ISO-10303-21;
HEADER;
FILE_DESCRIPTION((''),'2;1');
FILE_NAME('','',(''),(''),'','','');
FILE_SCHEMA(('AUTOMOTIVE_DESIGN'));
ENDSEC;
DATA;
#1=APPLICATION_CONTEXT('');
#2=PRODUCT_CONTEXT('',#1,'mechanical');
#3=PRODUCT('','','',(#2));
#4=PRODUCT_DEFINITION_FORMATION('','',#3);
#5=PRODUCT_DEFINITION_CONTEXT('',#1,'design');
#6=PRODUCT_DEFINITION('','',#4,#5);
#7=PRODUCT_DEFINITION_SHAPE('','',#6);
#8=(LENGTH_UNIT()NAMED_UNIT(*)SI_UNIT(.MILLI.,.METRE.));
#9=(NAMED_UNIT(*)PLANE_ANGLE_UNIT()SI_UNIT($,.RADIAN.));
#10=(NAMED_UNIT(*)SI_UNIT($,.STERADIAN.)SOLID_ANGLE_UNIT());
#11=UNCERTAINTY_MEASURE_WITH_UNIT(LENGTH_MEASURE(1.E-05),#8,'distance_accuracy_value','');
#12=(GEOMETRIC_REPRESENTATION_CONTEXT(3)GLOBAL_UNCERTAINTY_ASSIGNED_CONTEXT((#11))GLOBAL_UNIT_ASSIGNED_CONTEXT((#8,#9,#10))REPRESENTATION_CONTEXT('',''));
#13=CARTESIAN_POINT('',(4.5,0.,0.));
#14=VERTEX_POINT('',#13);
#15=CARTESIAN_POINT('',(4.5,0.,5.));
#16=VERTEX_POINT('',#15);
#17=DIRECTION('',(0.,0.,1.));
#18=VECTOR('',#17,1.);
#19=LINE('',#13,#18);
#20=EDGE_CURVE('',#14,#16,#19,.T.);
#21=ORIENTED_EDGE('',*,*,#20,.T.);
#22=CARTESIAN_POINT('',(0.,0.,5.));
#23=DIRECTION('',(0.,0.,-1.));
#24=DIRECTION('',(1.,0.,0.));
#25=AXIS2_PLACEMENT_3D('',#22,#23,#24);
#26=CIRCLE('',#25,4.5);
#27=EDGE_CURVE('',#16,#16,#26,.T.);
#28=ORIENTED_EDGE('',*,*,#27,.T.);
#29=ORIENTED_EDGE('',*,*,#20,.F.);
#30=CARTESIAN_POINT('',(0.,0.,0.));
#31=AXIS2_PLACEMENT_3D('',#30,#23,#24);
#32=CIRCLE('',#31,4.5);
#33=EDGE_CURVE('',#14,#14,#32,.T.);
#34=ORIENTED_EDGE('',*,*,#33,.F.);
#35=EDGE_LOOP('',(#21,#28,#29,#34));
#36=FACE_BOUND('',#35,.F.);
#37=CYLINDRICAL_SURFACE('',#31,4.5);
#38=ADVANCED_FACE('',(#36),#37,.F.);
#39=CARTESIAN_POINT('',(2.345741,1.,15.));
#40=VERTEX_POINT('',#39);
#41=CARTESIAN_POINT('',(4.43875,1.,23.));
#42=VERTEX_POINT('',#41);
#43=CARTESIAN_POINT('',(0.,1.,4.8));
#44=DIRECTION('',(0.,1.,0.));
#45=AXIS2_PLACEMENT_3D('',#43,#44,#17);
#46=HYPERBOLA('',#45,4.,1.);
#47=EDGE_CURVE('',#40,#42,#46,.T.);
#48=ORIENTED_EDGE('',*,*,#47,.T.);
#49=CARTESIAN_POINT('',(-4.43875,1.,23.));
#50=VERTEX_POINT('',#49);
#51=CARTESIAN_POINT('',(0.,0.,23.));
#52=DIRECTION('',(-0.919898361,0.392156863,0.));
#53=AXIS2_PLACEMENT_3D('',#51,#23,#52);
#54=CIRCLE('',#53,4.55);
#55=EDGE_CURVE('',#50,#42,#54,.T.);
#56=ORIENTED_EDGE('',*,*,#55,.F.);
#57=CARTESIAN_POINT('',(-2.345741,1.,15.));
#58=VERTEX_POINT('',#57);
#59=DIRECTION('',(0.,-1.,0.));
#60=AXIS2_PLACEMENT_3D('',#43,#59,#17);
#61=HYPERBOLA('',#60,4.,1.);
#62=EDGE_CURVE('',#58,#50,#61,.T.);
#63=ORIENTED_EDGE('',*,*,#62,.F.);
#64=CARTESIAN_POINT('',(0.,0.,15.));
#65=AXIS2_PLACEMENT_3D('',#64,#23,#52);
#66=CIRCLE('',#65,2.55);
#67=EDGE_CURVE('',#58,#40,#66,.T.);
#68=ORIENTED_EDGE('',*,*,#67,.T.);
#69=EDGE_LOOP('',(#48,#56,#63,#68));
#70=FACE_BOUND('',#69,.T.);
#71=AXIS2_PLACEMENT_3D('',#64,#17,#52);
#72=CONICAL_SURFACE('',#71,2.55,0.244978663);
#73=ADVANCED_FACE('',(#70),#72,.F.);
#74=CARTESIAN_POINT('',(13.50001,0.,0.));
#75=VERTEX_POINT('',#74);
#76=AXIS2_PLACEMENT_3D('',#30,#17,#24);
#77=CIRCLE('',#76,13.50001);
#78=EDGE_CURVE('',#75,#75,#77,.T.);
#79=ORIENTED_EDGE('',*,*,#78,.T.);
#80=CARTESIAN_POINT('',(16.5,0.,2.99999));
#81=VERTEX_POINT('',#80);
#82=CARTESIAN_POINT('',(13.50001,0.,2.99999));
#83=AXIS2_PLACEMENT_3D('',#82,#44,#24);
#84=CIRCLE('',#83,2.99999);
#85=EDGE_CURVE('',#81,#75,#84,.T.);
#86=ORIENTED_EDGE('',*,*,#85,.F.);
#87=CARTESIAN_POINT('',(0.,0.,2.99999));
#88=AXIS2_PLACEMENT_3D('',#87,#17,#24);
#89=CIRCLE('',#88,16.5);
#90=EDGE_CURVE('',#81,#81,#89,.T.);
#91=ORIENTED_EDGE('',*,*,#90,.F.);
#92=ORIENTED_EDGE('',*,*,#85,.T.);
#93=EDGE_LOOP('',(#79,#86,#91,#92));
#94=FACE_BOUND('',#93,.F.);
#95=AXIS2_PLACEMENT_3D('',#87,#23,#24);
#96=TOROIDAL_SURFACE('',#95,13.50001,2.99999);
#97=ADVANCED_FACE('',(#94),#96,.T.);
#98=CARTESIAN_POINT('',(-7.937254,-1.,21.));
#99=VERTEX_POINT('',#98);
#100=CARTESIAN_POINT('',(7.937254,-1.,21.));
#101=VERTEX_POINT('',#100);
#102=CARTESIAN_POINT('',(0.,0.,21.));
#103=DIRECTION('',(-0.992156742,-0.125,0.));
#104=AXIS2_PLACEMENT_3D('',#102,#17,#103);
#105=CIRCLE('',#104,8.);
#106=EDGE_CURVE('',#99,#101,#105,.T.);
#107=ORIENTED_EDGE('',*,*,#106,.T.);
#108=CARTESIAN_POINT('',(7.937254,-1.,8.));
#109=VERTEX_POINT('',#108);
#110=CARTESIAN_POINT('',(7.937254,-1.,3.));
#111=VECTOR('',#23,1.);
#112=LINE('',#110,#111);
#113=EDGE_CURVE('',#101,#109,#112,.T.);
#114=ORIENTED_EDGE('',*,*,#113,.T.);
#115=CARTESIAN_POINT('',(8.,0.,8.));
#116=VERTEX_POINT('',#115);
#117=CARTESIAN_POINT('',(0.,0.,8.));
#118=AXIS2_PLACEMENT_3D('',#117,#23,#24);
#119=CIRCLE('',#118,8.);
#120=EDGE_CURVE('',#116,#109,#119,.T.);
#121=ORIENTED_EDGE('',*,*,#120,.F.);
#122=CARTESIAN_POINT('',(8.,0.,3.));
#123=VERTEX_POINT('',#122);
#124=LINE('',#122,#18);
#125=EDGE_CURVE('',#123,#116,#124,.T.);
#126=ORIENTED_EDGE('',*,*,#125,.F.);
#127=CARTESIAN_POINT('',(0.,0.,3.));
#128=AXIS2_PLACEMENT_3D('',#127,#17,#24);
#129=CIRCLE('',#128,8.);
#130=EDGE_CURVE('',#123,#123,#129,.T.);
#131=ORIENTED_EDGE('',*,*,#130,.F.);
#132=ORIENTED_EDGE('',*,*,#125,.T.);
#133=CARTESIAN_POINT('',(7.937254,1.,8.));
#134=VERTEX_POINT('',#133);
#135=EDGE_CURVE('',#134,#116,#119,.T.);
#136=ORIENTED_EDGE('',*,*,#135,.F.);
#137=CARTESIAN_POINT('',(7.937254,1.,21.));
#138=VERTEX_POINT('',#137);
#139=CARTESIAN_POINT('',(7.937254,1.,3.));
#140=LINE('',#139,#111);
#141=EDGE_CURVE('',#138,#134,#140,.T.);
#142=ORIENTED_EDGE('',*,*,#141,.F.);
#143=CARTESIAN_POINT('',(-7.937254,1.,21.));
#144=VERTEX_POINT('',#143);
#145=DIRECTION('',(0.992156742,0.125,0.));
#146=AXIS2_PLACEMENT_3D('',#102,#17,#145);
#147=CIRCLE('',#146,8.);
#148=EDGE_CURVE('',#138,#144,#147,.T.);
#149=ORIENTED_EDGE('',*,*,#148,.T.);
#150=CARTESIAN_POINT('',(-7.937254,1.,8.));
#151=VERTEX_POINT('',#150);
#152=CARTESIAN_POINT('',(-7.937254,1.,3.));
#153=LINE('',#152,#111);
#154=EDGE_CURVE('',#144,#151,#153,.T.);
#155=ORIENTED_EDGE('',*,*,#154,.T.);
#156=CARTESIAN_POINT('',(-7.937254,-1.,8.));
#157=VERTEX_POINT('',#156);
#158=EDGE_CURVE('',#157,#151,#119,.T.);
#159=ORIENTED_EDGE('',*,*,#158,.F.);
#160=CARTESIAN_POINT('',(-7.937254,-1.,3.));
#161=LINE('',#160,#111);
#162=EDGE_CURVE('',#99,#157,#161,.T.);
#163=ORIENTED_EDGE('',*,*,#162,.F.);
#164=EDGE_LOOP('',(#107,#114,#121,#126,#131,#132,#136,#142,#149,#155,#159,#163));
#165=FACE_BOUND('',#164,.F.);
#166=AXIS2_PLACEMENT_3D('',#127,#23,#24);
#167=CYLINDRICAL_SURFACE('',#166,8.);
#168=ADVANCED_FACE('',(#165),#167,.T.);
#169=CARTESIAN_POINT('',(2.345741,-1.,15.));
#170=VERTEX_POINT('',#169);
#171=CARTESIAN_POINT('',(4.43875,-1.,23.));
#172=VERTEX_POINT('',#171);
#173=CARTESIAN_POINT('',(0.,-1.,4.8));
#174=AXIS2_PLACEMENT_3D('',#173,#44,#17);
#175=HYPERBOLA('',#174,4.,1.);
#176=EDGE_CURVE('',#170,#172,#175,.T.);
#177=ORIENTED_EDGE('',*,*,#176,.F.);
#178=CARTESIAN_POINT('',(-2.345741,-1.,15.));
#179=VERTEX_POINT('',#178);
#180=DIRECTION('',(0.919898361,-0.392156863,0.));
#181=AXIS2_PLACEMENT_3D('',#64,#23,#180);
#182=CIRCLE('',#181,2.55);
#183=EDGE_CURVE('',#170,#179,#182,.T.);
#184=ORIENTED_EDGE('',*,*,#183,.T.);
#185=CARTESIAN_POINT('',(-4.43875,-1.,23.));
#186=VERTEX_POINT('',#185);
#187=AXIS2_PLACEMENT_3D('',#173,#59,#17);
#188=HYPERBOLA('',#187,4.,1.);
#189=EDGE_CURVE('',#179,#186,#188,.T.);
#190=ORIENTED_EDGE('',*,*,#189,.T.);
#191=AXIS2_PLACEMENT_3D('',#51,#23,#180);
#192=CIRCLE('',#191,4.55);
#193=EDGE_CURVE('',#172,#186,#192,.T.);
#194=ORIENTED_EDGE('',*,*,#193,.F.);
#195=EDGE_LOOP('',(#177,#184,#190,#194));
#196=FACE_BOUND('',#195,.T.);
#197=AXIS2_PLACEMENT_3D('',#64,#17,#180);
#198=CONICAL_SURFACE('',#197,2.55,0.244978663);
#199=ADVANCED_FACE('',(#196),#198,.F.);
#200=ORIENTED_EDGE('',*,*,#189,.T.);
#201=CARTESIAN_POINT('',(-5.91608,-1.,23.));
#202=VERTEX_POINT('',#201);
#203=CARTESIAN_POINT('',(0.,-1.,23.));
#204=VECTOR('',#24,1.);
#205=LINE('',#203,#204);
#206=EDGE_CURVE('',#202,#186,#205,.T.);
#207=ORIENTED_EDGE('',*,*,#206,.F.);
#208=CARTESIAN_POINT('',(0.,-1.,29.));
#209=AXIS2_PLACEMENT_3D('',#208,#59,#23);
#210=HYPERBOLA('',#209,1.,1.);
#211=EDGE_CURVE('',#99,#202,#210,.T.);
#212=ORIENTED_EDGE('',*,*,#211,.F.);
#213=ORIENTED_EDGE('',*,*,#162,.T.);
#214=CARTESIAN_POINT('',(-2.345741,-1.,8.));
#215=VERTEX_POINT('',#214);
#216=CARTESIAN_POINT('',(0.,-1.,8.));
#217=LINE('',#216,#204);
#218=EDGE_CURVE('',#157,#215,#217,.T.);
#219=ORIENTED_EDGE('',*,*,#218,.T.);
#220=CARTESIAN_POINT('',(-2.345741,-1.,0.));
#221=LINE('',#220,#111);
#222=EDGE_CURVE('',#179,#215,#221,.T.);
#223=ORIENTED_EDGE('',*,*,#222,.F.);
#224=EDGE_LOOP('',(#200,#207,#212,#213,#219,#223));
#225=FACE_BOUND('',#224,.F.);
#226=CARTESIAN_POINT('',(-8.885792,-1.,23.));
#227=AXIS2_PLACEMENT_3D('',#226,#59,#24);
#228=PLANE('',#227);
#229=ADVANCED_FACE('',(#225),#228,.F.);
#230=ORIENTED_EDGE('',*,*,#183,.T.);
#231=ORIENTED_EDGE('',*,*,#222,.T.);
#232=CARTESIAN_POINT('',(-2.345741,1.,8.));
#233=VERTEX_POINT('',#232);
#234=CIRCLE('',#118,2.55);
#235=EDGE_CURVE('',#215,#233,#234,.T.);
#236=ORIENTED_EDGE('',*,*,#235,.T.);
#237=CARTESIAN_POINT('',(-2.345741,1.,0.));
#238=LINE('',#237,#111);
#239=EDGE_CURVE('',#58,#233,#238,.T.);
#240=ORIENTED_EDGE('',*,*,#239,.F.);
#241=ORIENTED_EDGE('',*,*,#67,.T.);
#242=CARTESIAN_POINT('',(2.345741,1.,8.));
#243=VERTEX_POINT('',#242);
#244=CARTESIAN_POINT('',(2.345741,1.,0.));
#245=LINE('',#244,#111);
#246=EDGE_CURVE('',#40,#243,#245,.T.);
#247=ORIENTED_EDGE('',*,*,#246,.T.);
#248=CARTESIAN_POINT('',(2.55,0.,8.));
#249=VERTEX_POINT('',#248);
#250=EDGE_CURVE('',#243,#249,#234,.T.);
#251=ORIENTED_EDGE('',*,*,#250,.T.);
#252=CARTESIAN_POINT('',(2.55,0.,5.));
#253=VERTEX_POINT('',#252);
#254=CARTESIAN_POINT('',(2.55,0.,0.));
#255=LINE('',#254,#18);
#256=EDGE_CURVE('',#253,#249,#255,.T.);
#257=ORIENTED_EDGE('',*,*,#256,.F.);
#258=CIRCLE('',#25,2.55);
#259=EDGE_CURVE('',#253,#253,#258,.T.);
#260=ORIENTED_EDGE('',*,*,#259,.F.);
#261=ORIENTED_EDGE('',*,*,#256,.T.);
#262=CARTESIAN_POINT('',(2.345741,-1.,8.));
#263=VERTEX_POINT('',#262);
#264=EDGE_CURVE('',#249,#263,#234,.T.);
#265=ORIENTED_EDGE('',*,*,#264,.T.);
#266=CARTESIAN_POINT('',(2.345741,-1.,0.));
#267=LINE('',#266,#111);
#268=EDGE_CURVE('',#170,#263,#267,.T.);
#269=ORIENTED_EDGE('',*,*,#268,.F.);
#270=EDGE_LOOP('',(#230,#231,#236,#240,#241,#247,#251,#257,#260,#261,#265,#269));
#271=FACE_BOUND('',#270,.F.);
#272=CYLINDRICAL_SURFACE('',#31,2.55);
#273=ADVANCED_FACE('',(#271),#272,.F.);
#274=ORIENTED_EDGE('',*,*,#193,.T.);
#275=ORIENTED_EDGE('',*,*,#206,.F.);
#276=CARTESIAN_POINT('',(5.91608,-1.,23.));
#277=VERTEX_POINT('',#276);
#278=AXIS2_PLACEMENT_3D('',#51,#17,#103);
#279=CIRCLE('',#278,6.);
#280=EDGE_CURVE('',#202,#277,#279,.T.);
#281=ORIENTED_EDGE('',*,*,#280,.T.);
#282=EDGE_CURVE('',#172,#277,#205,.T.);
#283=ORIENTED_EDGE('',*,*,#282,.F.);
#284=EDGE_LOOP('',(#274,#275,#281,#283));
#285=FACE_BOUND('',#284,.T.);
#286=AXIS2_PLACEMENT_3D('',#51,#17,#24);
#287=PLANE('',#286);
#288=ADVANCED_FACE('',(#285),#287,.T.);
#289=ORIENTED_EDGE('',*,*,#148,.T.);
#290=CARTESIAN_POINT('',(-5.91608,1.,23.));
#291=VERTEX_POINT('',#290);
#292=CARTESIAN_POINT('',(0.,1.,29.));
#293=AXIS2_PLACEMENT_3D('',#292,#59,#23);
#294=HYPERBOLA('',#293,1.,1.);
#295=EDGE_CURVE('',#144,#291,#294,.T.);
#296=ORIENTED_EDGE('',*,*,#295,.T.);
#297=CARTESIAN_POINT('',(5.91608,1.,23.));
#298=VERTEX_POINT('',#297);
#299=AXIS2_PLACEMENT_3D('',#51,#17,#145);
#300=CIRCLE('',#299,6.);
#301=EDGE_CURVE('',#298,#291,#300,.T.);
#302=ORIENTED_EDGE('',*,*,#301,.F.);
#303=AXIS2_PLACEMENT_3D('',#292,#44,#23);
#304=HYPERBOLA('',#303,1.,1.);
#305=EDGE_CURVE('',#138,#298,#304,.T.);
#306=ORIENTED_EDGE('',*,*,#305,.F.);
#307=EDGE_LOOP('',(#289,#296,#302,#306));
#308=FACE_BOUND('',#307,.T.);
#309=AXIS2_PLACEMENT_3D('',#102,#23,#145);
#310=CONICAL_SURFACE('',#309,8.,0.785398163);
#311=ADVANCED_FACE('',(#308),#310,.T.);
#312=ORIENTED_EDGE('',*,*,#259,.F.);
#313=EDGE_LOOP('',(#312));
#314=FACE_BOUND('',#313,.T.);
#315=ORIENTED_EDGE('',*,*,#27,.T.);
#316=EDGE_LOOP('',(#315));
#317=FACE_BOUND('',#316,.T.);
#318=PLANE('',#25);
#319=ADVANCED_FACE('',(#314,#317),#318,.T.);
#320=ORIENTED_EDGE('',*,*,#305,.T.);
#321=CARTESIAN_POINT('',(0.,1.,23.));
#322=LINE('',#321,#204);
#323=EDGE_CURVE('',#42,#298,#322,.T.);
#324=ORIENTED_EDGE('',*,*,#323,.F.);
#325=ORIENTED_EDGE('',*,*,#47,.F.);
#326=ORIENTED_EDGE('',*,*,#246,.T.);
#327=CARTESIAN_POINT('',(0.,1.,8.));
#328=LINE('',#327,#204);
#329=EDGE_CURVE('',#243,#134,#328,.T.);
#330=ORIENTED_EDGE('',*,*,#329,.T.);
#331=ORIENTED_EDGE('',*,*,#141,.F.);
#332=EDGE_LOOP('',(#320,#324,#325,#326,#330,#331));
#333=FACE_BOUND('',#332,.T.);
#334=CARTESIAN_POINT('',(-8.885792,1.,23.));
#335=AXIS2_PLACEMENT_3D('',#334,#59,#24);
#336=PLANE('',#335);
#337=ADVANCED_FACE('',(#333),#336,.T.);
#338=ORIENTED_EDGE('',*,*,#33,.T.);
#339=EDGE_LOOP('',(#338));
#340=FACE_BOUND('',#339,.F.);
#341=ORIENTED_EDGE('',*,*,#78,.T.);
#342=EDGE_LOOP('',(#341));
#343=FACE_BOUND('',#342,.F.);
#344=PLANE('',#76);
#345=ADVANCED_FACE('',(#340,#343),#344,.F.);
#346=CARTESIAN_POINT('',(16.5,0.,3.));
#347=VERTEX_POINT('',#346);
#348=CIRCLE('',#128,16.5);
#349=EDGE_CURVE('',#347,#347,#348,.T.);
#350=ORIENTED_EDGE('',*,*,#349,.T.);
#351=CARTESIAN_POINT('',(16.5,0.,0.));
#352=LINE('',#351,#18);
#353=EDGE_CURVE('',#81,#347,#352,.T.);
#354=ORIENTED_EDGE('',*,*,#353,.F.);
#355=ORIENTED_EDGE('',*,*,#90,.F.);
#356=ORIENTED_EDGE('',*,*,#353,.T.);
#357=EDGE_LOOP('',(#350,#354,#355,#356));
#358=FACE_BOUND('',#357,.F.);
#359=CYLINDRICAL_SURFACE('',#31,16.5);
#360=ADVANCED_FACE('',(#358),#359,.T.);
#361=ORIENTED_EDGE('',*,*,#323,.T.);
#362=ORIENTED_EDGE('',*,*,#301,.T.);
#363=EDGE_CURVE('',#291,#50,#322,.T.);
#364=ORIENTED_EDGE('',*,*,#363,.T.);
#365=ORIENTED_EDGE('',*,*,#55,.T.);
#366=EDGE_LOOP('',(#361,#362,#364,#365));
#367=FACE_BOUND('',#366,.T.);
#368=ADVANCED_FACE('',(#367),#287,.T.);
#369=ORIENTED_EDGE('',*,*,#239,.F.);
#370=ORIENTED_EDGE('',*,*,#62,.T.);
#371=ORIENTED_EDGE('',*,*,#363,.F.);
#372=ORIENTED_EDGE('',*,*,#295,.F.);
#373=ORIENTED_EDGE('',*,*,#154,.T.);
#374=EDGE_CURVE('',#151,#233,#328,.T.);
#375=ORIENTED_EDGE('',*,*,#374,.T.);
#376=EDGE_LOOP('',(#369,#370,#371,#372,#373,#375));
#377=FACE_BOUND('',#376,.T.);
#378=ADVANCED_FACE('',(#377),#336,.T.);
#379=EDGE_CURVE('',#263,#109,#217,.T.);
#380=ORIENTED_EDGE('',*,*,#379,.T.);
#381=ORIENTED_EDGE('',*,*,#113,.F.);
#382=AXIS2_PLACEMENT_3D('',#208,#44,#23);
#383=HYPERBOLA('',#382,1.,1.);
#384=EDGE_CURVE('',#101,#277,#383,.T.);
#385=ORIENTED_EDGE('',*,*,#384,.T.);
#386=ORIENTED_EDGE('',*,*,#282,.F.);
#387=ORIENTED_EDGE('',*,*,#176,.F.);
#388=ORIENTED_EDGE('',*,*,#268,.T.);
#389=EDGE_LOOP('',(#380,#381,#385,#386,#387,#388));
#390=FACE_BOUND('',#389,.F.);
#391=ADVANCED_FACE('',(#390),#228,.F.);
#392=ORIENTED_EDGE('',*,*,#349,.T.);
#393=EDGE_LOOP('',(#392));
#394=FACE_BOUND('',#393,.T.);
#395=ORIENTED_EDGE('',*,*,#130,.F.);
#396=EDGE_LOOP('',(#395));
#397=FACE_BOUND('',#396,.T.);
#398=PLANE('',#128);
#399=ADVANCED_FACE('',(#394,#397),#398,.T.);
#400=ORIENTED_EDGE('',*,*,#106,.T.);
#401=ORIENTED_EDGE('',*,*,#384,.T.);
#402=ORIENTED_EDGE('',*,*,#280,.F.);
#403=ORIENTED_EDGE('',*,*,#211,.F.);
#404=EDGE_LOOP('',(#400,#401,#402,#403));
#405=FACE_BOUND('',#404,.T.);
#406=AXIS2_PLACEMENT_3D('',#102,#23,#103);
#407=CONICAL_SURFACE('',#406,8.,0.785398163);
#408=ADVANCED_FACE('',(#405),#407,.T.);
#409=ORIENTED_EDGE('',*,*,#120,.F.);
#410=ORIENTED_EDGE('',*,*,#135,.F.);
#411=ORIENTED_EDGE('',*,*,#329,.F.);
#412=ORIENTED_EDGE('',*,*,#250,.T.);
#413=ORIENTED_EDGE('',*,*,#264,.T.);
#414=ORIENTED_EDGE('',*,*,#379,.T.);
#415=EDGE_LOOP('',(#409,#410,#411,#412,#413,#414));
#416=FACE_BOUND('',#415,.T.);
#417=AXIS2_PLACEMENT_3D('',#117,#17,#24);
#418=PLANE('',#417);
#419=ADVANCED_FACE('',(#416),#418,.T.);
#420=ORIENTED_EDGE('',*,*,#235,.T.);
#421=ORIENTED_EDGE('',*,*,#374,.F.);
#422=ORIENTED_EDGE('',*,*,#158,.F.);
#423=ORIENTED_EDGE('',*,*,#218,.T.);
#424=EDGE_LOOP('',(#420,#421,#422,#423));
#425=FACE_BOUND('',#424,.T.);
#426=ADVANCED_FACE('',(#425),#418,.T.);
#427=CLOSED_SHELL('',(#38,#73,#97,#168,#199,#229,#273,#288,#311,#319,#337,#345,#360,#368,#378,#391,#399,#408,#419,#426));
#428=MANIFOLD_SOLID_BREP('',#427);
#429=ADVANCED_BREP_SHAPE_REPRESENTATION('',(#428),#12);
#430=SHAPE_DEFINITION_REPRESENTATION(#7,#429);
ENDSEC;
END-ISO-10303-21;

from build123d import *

# Parameters (mm, degrees)
F0_R      = 16.5
F1_DEPTH  = 3
F2_R      = 8
F3_DEPTH  = 20
F4_R      = 2.55
F5_DEPTH  = 25
F6_R      = 4.5
F7_DEPTH  = 5
F8_W      = 17.7715833097
F8_H      = 2
F9_DEPTH  = 15
F10_R     = 2.99999
F11_SIZE  = 2
F12_SIZE2 = 2
F12_SIZE  = 8


# Not quite as in the source:
# - a fillet or chamfer is up to 0.001 mm smaller than in the source, because OpenCascade refuses the exact size


with BuildPart() as f1:
    # F0 (on Top) → F1 (new body)
    with BuildSketch(Plane.XY):
        Circle(F0_R)
    extrude(amount=F1_DEPTH)

    # F2 (on face) → F3 (join)
    with BuildSketch(Plane.XY.offset(3)):
        Circle(F2_R)
    extrude(amount=F3_DEPTH)

    # F4 (on face) → F5 (cut)
    with BuildSketch(Plane(origin=(0, 0, 0), x_dir=(1, 0, 0), z_dir=(0, 0, -1))):
        Circle(F4_R)
    extrude(amount=-F5_DEPTH, mode=Mode.SUBTRACT)

    # F6 (on face) → F7 (cut)
    with BuildSketch(Plane(origin=(0, 0, 0), x_dir=(1, 0, 0), z_dir=(0, 0, -1))):
        Circle(F6_R)
    extrude(amount=-F7_DEPTH, mode=Mode.SUBTRACT)

    # F8 (on face) → F9 (cut)
    with BuildSketch(Plane.XY.offset(23)):
        Rectangle(F8_W, F8_H)
    extrude(amount=-F9_DEPTH, mode=Mode.SUBTRACT)

    # F10 (radius 3 in the source; OpenCascade refuses exactly that, so slightly less here)
    f10_edges = [f1.edges().sort_by_distance(p)[0] for p in [
        (-16.5, 0, 0),
    ]]
    fillet(f10_edges, radius=F10_R)

    # F11
    f11_edges = [f1.edges().sort_by_distance(p)[0] for p in [
        (0, 8, 23),
        (0, -8, 23),
    ]]
    chamfer(f11_edges, length=F11_SIZE)

    # F12
    f12_edges = [f1.edges().sort_by_distance(p)[0] for p in [
        (0, 2.55, 23),
        (0, -2.55, 23),
    ]]
    f12_side = f1.faces().sort_by_distance((2.498413, 0.510324, 7.806088))[0]
    chamfer(f12_edges, length=F12_SIZE, length2=F12_SIZE2, reference=f12_side)


solid = f1.part
